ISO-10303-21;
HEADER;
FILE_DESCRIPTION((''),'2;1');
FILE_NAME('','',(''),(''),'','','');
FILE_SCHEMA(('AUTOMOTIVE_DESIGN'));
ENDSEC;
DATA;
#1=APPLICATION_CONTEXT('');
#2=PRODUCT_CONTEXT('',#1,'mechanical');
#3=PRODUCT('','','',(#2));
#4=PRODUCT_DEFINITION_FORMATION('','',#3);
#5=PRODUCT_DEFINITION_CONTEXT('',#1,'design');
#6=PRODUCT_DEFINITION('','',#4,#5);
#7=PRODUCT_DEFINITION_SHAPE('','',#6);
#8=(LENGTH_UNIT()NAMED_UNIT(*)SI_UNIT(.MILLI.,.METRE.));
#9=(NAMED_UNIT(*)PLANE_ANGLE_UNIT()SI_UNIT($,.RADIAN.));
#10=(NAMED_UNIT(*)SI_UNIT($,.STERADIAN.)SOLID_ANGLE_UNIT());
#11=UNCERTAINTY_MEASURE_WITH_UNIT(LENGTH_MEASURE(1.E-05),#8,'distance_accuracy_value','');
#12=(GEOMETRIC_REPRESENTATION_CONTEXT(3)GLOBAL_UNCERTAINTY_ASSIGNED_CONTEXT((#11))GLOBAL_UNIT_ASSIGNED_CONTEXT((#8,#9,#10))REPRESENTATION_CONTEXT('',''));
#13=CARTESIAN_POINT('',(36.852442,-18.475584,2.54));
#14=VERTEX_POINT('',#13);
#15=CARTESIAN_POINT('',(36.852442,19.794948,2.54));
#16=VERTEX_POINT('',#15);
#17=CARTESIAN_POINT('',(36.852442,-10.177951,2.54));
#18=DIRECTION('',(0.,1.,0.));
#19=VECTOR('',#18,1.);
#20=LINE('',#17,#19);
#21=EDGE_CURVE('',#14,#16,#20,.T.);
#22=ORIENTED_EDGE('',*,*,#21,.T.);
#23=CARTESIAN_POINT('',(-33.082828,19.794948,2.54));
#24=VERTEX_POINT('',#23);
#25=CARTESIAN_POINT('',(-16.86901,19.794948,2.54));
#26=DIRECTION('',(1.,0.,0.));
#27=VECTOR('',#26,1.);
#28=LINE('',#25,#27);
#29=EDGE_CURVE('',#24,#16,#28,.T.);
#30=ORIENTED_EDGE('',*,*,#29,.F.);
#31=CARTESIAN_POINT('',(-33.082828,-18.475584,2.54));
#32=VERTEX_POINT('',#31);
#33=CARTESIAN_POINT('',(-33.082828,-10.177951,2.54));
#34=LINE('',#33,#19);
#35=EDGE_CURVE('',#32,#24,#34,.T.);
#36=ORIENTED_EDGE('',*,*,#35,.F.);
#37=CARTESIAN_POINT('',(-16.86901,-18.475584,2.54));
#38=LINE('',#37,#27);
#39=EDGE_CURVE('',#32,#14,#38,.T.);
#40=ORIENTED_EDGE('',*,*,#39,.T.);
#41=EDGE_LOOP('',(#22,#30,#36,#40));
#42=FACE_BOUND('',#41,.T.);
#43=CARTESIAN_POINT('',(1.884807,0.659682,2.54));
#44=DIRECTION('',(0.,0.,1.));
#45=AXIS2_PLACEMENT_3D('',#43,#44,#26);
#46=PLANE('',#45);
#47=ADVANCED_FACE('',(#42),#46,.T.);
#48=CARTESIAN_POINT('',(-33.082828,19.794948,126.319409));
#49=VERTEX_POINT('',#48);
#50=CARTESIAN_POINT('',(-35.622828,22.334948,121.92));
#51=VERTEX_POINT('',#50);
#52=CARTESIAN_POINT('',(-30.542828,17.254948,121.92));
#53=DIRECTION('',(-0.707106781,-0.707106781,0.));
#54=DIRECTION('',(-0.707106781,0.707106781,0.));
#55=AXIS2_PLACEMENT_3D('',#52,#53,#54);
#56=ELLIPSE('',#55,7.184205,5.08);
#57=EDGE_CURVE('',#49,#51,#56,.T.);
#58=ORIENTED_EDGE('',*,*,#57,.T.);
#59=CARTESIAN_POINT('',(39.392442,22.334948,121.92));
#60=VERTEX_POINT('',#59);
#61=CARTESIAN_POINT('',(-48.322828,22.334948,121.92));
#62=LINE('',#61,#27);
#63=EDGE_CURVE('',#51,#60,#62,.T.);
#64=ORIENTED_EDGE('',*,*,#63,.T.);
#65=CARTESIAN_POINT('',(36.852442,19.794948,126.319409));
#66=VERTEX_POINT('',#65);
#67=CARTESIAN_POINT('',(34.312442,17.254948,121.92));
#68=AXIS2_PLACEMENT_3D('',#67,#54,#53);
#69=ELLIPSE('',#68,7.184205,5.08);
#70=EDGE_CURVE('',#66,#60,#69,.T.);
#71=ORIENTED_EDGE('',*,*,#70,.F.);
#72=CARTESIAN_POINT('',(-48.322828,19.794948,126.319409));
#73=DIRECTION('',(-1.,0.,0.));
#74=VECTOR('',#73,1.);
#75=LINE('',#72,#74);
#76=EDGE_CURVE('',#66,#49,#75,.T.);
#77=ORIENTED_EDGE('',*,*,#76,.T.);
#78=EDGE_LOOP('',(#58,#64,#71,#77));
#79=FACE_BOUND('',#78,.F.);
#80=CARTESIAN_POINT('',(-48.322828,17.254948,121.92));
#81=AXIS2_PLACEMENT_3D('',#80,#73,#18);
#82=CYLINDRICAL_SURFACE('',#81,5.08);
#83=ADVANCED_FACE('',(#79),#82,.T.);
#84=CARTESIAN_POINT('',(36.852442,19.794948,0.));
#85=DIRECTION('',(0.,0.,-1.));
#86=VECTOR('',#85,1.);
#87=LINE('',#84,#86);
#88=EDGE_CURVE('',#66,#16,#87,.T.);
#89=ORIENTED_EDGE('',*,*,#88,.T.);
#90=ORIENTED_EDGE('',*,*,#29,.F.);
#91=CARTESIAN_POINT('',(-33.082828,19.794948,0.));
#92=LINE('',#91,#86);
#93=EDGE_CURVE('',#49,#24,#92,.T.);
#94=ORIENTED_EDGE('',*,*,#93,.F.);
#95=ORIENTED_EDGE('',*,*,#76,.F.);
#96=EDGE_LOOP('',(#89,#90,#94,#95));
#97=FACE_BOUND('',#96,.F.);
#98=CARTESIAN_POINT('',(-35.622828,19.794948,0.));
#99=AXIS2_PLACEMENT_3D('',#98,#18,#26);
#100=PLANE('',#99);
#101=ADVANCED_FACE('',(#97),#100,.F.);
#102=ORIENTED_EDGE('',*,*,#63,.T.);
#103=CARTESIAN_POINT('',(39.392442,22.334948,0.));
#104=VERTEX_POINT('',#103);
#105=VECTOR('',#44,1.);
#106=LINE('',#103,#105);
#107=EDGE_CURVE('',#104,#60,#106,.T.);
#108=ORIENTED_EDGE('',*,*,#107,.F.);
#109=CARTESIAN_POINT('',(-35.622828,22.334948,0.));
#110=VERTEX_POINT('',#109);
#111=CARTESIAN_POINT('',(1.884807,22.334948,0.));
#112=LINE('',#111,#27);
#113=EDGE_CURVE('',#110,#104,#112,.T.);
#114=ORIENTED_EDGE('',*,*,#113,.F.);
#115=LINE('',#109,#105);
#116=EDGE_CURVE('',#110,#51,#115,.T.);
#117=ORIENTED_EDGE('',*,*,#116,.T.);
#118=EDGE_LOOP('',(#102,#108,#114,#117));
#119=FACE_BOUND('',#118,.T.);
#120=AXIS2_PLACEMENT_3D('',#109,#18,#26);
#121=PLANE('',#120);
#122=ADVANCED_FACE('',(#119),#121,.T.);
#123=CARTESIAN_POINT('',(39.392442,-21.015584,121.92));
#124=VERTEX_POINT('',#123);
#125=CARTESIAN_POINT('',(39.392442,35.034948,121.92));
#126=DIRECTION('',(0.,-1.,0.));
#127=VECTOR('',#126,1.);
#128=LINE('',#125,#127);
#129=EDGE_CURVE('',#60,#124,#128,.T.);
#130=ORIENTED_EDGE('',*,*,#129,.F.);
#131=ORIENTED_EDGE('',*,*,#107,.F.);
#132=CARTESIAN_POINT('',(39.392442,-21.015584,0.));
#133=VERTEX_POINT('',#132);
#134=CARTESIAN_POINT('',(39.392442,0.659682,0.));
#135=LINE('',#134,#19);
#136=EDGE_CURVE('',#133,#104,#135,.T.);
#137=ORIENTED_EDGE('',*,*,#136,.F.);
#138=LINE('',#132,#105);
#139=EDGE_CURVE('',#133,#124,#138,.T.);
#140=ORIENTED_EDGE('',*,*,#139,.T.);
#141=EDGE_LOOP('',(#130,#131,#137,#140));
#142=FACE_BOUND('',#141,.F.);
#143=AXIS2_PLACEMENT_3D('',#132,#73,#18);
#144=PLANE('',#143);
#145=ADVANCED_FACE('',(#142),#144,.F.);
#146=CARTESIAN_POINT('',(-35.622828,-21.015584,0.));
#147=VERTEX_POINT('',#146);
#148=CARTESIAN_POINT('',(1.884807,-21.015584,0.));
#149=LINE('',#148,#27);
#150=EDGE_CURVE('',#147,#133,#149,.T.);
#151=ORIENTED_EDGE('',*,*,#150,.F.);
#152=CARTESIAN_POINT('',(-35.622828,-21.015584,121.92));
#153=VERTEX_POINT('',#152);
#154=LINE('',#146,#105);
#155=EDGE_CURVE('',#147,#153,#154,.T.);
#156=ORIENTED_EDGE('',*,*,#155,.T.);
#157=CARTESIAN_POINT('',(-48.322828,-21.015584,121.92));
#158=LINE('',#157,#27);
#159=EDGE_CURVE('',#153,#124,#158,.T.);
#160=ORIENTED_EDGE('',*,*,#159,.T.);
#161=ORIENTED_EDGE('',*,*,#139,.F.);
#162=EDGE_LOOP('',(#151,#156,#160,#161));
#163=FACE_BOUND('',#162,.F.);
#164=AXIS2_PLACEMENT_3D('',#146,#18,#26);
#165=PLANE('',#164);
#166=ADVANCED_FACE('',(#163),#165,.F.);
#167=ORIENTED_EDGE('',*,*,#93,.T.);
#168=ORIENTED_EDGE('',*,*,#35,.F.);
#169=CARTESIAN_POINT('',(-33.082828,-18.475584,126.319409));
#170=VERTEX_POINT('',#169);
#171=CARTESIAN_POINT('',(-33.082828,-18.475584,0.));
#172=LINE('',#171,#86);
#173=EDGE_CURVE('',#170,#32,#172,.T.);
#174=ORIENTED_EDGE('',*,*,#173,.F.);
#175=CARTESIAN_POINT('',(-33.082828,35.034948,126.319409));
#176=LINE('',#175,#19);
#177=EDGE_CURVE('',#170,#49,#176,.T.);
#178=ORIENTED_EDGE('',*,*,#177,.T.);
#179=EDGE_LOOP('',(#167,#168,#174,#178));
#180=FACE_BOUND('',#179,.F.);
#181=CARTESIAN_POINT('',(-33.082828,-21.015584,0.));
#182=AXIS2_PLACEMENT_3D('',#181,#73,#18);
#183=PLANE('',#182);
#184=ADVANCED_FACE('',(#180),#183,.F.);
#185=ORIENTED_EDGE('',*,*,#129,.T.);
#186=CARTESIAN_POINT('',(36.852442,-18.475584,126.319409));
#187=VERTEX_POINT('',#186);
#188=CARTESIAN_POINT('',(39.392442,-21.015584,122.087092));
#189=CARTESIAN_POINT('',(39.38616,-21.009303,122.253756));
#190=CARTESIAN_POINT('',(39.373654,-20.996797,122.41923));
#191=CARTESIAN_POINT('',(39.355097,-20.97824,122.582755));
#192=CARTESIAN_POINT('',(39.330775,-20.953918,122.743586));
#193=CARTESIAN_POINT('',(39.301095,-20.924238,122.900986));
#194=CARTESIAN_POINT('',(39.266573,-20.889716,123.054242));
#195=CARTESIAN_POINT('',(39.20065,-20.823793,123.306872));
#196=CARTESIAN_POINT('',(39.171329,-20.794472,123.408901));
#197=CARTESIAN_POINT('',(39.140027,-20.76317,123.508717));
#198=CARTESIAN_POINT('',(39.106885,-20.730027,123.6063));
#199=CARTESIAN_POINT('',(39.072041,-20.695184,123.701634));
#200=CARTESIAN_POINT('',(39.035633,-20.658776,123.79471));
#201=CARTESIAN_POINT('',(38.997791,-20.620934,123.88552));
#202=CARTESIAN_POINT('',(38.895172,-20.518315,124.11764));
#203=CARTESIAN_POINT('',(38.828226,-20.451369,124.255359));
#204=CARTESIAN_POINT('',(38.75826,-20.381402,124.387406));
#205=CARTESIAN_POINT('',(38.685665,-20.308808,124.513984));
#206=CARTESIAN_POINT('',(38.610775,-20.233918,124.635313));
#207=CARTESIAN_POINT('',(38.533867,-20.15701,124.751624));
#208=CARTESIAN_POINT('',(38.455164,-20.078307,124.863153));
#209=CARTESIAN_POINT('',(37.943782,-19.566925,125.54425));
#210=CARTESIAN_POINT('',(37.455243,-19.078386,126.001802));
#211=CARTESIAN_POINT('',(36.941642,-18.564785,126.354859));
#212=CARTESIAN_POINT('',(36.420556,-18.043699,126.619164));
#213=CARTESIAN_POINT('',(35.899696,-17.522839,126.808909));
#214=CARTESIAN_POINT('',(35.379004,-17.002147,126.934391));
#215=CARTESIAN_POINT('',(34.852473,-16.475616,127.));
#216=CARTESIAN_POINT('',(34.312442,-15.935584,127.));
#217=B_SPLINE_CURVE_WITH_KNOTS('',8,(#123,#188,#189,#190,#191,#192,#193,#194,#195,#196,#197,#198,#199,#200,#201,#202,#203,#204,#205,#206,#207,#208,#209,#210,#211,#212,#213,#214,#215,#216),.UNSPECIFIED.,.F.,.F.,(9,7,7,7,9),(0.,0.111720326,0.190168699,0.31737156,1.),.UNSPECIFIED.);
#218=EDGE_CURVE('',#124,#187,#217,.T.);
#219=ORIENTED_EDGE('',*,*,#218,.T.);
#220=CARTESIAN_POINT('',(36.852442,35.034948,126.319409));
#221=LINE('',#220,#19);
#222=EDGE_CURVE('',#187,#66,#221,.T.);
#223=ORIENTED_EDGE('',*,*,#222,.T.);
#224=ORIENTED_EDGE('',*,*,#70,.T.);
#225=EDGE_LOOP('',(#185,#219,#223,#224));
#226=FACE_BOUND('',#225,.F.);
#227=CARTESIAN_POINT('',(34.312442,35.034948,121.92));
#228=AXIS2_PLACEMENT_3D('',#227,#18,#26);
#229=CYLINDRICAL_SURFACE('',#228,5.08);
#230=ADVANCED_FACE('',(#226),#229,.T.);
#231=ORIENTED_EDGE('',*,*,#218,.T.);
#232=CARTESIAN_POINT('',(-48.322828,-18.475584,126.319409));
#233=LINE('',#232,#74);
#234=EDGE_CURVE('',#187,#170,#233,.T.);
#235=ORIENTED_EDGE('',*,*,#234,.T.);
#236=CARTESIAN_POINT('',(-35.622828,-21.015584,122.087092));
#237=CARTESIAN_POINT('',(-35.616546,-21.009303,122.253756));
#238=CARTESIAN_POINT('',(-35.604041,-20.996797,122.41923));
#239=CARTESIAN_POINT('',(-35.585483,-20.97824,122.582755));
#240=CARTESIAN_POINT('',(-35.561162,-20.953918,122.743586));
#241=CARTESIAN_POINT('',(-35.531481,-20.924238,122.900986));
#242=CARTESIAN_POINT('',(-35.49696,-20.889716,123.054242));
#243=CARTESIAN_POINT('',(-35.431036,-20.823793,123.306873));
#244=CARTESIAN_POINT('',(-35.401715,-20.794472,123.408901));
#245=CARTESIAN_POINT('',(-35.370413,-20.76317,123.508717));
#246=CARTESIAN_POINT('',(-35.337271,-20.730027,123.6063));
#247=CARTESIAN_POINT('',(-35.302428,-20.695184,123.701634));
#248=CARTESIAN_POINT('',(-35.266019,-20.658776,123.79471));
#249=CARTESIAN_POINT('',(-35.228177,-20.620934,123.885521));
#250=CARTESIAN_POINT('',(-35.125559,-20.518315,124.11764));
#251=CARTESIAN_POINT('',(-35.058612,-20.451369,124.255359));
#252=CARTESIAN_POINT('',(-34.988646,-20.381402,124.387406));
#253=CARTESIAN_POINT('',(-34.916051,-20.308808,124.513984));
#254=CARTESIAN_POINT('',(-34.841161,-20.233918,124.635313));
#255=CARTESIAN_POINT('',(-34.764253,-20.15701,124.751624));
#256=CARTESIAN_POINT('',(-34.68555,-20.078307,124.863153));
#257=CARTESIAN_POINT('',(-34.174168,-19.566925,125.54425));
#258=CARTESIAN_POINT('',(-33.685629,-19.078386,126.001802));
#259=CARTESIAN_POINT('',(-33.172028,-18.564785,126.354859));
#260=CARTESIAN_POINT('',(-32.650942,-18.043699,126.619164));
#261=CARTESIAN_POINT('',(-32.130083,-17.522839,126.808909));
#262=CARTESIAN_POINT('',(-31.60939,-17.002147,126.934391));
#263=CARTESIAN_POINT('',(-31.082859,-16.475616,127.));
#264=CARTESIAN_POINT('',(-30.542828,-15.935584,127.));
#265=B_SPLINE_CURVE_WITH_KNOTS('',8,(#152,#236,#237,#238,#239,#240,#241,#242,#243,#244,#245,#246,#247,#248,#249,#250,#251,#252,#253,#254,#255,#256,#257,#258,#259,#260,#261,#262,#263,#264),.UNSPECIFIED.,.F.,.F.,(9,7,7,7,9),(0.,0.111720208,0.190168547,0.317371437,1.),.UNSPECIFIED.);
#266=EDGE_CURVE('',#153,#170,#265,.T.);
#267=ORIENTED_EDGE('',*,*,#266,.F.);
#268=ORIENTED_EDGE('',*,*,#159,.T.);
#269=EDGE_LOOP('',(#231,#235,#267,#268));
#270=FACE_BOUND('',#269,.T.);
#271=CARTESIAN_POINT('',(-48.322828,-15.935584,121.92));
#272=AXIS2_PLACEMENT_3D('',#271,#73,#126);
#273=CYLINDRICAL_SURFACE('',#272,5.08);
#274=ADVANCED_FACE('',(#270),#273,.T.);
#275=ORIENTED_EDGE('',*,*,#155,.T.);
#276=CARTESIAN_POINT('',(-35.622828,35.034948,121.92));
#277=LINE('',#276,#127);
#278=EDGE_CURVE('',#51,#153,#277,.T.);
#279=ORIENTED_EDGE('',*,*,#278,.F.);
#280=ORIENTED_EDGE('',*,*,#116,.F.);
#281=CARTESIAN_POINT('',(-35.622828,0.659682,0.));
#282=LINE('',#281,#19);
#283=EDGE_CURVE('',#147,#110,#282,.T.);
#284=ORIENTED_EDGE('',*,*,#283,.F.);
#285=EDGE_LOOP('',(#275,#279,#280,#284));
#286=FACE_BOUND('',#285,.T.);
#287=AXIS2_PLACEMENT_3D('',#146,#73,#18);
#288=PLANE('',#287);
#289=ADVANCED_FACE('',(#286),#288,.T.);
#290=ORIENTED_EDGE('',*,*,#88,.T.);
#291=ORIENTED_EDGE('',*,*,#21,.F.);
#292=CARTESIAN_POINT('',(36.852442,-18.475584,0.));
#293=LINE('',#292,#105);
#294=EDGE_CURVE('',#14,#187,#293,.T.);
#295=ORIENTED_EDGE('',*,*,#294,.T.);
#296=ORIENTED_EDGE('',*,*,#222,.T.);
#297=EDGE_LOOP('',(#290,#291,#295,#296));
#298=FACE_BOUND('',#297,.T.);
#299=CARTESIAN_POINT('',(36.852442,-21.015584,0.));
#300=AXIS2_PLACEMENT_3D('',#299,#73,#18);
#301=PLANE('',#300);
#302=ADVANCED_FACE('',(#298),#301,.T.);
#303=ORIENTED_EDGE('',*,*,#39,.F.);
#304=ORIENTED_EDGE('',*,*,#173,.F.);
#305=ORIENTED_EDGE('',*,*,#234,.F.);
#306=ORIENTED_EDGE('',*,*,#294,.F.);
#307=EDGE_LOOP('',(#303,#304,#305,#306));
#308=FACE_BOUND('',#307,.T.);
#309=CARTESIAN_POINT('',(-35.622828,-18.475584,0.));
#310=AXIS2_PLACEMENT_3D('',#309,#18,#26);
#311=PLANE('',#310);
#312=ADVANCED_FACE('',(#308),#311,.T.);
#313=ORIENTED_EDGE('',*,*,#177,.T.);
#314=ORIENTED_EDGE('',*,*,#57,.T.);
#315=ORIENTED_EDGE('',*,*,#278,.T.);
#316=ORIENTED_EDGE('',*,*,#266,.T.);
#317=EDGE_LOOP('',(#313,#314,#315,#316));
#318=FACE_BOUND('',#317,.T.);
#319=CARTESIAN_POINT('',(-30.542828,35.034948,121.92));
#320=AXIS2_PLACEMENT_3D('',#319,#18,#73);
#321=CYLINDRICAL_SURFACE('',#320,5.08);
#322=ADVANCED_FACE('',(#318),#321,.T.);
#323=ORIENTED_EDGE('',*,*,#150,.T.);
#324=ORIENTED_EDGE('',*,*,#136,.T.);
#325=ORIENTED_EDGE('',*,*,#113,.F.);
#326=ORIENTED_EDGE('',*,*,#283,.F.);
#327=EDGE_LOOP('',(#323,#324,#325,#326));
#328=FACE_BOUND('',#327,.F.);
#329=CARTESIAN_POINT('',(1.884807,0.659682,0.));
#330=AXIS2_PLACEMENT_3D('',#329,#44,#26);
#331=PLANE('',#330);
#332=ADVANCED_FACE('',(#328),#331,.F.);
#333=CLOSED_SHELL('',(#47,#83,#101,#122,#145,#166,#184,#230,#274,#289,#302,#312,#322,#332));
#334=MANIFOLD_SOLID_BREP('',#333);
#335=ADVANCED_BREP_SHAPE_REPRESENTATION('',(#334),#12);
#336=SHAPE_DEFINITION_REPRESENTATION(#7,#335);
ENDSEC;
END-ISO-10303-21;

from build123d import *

# Parameters (mm, degrees)
F0_W        = 75.0152692199
F0_H        = 43.3505326509
F1_DEPTH    = 127
F2_T        = -2.54
F3_T1_DEPTH = 100.4152692199
F3_T3_DEPTH = 68.7505326509


# Not quite as in the source:
# - a fillet or chamfer that OpenCascade refuses, or shapes differently, is made with other operations: its cross-section is extruded or revolved along the edge and cut away or added


with BuildPart() as f1:
    # F0 (on Top) → F1 (new body)
    with BuildSketch(Plane.XY):
        with Locations((1.8848069012, 0.6596818566)):
            Rectangle(F0_W, F0_H)
    extrude(amount=F1_DEPTH)

    # F2
    f2_openings = [f1.faces().sort_by_distance(p)[0] for p in [
        (1.884807, 0.659682, 127),
    ]]
    offset(amount=F2_T, openings=f2_openings)

    # F3: fillet of radius 5.08 on 4 edges, made by hand

    # F3_s2 → F3_t1 (cut)
    with BuildSketch(Plane.YZ.offset(-48.3228277087)):
        with BuildLine():
            ThreePointArc((22.3349481821, 121.92), (20.8470506305, 125.5121024484), (17.2549481821, 127))
            Line((17.2549481821, 127), (22.3349481821, 127))
            Line((22.3349481821, 127), (22.3349481821, 121.92))
        make_face()
        with BuildLine():
            ThreePointArc((-21.0155844688, 121.92), (-19.5276869173, 125.5121024484), (-15.9355844688, 127))
            Line((-15.9355844688, 127), (-21.0155844688, 127))
            Line((-21.0155844688, 127), (-21.0155844688, 121.92))
        make_face()
    extrude(amount=F3_T1_DEPTH, mode=Mode.SUBTRACT)

    # F3_s4 → F3_t3 (cut)
    with BuildSketch(Plane.XZ.offset(-35.0349481821)):
        with BuildLine():
            ThreePointArc((-35.6228277087, 121.92), (-34.1349301571, 125.5121024484), (-30.5428277087, 127))
            Line((-30.5428277087, 127), (-35.6228277087, 127))
            Line((-35.6228277087, 127), (-35.6228277087, 121.92))
        make_face()
        with BuildLine():
            ThreePointArc((39.3924415112, 121.92), (37.9045439596, 125.5121024484), (34.3124415112, 127))
            Line((34.3124415112, 127), (39.3924415112, 127))
            Line((39.3924415112, 127), (39.3924415112, 121.92))
        make_face()
    extrude(amount=F3_T3_DEPTH, mode=Mode.SUBTRACT)


solid = f1.part
